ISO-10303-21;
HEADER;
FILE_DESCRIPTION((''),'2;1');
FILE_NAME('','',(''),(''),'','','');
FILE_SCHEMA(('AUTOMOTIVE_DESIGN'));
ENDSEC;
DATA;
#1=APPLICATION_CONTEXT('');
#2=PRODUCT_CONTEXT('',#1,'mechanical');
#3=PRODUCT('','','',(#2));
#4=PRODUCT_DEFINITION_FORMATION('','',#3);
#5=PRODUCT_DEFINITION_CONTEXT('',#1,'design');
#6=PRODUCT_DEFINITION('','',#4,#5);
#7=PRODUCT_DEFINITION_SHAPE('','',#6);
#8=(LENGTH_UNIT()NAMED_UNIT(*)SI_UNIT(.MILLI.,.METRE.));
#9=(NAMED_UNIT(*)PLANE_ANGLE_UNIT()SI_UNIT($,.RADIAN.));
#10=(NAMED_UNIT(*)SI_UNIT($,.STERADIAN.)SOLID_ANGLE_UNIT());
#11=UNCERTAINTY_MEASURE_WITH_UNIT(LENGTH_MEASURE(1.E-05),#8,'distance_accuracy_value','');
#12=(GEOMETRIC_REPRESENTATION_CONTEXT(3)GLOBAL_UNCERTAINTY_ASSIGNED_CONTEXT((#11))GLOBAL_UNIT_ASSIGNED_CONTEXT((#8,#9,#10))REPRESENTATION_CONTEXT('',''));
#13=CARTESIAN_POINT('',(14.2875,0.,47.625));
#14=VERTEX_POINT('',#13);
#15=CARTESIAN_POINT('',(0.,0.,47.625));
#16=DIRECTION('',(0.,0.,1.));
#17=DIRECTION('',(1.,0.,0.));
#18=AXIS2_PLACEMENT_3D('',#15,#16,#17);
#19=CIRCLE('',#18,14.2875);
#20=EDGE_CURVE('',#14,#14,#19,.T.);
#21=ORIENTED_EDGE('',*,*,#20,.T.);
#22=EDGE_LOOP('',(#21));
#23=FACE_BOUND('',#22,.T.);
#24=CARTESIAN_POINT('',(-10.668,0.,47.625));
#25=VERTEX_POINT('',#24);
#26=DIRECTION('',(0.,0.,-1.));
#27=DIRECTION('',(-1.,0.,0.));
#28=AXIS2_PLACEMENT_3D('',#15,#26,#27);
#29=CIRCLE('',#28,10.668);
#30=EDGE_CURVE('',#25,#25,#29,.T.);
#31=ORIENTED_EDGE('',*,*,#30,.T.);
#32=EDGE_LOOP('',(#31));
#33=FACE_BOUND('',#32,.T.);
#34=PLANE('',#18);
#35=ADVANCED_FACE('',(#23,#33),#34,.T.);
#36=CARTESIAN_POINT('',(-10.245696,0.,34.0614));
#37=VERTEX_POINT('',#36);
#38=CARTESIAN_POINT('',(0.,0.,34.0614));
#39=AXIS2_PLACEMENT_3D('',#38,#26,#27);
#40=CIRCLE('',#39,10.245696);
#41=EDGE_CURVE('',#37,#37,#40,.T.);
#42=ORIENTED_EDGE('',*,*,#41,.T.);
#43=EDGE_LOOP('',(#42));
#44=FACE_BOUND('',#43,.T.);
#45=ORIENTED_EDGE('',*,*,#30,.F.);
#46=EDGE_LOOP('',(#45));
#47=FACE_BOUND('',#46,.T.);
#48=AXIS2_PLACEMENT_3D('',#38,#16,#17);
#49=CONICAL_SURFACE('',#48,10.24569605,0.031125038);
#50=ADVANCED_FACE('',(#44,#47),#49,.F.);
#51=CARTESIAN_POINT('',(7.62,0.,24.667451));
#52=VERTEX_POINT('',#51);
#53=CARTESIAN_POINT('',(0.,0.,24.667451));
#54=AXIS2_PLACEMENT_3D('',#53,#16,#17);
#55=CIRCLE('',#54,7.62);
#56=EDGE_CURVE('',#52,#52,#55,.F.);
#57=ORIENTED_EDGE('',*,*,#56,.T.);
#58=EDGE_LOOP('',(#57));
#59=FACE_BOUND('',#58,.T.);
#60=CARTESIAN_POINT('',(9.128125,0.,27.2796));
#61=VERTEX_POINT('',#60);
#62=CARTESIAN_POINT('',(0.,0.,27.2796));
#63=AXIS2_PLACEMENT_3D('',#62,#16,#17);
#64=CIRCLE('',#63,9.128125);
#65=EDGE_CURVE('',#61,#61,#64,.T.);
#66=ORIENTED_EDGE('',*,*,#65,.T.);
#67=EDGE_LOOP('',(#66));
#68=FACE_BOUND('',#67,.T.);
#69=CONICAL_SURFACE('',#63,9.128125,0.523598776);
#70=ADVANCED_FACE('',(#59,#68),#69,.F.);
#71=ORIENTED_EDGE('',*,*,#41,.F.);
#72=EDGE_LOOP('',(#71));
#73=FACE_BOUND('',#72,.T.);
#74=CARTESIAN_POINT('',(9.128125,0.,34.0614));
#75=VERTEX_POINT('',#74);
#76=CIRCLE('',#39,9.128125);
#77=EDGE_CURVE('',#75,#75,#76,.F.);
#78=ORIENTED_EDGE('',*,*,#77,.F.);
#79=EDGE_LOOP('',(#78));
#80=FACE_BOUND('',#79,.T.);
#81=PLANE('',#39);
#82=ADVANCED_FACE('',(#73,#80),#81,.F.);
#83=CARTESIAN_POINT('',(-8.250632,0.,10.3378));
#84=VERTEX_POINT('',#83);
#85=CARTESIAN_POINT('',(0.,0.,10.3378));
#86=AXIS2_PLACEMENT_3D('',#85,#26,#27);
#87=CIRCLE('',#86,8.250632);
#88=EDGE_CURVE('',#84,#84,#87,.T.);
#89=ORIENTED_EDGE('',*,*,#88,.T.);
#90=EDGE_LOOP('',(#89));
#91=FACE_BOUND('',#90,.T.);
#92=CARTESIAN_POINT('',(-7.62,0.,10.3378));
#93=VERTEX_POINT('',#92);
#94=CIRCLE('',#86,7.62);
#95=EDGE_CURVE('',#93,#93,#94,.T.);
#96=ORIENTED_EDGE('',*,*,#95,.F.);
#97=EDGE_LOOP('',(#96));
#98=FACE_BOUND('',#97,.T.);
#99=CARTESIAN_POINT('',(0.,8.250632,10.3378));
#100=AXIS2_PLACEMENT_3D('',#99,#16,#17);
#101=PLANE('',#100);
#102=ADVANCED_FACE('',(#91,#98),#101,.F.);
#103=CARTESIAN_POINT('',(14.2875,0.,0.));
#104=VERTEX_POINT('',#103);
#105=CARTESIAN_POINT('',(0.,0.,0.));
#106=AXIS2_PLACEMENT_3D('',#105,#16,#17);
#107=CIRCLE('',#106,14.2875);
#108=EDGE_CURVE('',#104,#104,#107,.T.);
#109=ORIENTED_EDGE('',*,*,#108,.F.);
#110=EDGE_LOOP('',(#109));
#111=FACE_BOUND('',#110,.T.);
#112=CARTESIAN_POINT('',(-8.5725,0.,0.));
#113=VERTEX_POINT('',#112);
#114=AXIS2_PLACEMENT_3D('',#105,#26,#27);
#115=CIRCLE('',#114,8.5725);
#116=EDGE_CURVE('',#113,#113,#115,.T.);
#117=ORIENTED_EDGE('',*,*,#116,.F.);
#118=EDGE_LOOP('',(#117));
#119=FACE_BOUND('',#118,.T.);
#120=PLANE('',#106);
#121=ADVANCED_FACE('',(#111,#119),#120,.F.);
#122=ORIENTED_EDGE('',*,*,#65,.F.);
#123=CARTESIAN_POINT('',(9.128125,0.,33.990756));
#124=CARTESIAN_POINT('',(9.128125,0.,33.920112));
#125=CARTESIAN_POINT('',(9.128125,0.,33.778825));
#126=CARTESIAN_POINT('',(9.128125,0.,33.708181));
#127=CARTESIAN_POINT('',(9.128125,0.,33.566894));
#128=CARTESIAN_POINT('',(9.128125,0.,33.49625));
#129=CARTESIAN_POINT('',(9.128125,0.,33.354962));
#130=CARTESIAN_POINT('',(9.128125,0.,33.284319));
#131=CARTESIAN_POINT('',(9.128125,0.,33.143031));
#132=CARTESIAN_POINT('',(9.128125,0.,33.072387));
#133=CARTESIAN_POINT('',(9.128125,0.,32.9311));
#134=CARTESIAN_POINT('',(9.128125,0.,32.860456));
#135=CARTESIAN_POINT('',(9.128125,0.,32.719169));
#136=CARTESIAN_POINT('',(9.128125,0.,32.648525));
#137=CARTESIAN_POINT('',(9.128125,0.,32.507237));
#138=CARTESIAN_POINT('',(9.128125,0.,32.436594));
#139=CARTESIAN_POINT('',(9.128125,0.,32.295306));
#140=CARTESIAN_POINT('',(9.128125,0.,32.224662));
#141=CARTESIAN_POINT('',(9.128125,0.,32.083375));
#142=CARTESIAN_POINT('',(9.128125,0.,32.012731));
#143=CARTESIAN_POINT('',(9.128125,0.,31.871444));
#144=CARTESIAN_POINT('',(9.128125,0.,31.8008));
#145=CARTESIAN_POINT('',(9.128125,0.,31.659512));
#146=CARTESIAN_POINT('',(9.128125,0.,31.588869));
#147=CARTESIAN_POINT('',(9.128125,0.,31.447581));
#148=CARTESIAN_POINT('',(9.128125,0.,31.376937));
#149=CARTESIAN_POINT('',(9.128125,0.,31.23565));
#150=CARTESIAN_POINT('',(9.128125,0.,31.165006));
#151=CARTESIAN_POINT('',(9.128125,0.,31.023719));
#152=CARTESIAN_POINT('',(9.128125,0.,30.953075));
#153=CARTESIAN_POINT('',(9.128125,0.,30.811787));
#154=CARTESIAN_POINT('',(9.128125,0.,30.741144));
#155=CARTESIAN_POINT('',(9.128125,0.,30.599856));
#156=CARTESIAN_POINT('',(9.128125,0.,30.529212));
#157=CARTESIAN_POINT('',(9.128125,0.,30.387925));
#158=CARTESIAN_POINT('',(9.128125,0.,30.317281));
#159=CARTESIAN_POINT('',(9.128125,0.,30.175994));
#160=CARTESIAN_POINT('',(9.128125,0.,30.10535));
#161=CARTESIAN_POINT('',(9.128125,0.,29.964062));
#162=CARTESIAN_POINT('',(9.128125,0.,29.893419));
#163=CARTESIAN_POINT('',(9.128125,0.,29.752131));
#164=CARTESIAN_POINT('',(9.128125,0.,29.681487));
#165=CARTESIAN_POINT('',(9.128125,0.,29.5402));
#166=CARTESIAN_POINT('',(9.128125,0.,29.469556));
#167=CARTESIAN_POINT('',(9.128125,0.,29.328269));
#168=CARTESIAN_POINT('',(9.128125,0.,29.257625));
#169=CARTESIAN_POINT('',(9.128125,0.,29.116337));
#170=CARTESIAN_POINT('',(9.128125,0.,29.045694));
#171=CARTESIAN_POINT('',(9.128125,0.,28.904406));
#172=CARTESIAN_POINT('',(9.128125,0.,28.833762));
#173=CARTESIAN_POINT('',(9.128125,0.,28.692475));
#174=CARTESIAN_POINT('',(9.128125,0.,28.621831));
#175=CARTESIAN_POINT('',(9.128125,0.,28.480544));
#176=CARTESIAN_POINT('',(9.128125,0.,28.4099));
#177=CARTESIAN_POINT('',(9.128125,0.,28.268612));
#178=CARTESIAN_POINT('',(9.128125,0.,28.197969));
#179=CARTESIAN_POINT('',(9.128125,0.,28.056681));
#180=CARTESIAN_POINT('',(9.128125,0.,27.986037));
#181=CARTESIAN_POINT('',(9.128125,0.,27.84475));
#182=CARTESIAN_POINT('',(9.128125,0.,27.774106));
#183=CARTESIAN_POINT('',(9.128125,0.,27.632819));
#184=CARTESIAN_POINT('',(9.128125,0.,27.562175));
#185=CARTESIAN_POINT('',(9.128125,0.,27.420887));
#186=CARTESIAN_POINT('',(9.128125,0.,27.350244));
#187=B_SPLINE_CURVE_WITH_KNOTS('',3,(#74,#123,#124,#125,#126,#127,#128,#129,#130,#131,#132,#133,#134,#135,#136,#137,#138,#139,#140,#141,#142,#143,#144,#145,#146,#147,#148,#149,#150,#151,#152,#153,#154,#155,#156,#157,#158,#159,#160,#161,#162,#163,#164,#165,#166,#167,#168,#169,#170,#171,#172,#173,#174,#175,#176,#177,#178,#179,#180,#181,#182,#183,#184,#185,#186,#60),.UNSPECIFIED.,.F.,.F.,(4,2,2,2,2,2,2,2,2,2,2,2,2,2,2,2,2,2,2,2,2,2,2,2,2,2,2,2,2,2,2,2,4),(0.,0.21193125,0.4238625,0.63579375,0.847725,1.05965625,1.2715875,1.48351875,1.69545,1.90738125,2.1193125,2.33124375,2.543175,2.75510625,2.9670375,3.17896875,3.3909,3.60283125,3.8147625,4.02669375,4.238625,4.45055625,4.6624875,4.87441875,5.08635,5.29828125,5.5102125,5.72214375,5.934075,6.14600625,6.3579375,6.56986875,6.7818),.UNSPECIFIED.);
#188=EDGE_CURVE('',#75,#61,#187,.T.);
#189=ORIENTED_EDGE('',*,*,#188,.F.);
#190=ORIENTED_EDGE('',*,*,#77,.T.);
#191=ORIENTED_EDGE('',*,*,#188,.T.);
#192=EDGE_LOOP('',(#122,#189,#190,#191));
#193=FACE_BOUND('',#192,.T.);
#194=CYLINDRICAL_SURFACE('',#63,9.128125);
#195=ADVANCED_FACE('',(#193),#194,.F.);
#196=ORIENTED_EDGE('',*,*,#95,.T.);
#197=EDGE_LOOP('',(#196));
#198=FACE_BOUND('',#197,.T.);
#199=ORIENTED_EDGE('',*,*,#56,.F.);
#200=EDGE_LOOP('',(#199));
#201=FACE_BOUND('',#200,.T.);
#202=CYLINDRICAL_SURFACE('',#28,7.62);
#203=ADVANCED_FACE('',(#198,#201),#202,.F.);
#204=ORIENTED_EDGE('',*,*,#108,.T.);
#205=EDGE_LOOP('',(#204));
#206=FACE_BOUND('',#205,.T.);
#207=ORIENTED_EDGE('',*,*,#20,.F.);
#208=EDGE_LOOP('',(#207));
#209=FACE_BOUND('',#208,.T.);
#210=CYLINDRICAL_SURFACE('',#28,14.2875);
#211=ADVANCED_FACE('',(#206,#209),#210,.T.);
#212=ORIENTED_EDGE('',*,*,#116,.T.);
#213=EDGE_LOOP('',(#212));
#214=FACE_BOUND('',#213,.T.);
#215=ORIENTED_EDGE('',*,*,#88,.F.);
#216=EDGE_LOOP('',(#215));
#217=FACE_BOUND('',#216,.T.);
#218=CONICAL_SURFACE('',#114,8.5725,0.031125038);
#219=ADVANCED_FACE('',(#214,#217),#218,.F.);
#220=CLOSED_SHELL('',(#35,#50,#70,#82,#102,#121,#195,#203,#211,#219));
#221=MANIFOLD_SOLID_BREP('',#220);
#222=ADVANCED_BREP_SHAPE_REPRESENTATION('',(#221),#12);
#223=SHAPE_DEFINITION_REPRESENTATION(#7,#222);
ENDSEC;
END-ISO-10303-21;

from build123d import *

# Parameters (mm, degrees)
BODYSCH_R       = 14.2875
BODY_DEPTH      = 47.625
FLOWSCH_R       = 9.128125
FLOW_DEPTH      = 20.3454
FLOWSMALLSCH_R  = 7.62
FLOWSMALL_DEPTH = 43.409911534


# Read off the part's stored shape, not the designer's step: Flow30deg
with BuildPart() as part:
    # BodySch → Body (new body)
    with BuildSketch(Plane.XY):
        Circle(BODYSCH_R)
    extrude(amount=BODY_DEPTH)

    # FlowSch → Flow (cut)
    with BuildSketch(Plane.XY.offset(47.625)):
        Circle(FLOWSCH_R)
    extrude(amount=-FLOW_DEPTH, mode=Mode.SUBTRACT)

    # ThreadSch → Thread (revolve, cut)
    with BuildSketch(Plane(origin=(0, 0, 0), x_dir=(0, 0, -1), z_dir=(1, 0, 0)), mode=Mode.PRIVATE) as thread_sk:
        Polygon((-34.0614, 0), (-34.0614, 10.24569605), (-47.625, 10.668), (-47.625, 0), align=None)
    revolve(thread_sk.sketch.rotate(Axis((0, 0, 0), (0, 0, 1)), 90), axis=Axis((0, 0, 0), (0, 0, 1)), mode=Mode.SUBTRACT)

    # ThreadSmallSke → ThreadSmall (revolve, cut)
    with BuildSketch(Plane(origin=(0, 0, 0), x_dir=(0, 0, -1), z_dir=(1, 0, 0)), mode=Mode.PRIVATE) as threadsmall_sk:
        Polygon((0, 0), (0, 8.5725), (-10.3378, 8.250631633), (-10.3378, 0), (-0.549620086, 0), align=None)
    revolve(threadsmall_sk.sketch.rotate(Axis((0, 0, 0), (0, 0, 1)), 90), axis=Axis((0, 0, 0), (0, 0, 1)), mode=Mode.SUBTRACT)

    # Flow30deg outline → Flow30deg (revolve, cut)
    with BuildSketch(Plane.XZ):
        Polygon((0, 27.2796), (0, 11.469223722), (9.128125, 27.2796), align=None)
    revolve(axis=Axis((0, 0, 0), (0, 0, 1)), mode=Mode.SUBTRACT)

    # FlowSmallSch → FlowSmall (cut, through all)
    with BuildSketch(Plane(origin=(0, 0, 10.3378), x_dir=(-1, 0, 0), z_dir=(0, 0, -1))):
        Circle(FLOWSMALLSCH_R)
    extrude(amount=-FLOWSMALL_DEPTH, mode=Mode.SUBTRACT)


solid = part.part
